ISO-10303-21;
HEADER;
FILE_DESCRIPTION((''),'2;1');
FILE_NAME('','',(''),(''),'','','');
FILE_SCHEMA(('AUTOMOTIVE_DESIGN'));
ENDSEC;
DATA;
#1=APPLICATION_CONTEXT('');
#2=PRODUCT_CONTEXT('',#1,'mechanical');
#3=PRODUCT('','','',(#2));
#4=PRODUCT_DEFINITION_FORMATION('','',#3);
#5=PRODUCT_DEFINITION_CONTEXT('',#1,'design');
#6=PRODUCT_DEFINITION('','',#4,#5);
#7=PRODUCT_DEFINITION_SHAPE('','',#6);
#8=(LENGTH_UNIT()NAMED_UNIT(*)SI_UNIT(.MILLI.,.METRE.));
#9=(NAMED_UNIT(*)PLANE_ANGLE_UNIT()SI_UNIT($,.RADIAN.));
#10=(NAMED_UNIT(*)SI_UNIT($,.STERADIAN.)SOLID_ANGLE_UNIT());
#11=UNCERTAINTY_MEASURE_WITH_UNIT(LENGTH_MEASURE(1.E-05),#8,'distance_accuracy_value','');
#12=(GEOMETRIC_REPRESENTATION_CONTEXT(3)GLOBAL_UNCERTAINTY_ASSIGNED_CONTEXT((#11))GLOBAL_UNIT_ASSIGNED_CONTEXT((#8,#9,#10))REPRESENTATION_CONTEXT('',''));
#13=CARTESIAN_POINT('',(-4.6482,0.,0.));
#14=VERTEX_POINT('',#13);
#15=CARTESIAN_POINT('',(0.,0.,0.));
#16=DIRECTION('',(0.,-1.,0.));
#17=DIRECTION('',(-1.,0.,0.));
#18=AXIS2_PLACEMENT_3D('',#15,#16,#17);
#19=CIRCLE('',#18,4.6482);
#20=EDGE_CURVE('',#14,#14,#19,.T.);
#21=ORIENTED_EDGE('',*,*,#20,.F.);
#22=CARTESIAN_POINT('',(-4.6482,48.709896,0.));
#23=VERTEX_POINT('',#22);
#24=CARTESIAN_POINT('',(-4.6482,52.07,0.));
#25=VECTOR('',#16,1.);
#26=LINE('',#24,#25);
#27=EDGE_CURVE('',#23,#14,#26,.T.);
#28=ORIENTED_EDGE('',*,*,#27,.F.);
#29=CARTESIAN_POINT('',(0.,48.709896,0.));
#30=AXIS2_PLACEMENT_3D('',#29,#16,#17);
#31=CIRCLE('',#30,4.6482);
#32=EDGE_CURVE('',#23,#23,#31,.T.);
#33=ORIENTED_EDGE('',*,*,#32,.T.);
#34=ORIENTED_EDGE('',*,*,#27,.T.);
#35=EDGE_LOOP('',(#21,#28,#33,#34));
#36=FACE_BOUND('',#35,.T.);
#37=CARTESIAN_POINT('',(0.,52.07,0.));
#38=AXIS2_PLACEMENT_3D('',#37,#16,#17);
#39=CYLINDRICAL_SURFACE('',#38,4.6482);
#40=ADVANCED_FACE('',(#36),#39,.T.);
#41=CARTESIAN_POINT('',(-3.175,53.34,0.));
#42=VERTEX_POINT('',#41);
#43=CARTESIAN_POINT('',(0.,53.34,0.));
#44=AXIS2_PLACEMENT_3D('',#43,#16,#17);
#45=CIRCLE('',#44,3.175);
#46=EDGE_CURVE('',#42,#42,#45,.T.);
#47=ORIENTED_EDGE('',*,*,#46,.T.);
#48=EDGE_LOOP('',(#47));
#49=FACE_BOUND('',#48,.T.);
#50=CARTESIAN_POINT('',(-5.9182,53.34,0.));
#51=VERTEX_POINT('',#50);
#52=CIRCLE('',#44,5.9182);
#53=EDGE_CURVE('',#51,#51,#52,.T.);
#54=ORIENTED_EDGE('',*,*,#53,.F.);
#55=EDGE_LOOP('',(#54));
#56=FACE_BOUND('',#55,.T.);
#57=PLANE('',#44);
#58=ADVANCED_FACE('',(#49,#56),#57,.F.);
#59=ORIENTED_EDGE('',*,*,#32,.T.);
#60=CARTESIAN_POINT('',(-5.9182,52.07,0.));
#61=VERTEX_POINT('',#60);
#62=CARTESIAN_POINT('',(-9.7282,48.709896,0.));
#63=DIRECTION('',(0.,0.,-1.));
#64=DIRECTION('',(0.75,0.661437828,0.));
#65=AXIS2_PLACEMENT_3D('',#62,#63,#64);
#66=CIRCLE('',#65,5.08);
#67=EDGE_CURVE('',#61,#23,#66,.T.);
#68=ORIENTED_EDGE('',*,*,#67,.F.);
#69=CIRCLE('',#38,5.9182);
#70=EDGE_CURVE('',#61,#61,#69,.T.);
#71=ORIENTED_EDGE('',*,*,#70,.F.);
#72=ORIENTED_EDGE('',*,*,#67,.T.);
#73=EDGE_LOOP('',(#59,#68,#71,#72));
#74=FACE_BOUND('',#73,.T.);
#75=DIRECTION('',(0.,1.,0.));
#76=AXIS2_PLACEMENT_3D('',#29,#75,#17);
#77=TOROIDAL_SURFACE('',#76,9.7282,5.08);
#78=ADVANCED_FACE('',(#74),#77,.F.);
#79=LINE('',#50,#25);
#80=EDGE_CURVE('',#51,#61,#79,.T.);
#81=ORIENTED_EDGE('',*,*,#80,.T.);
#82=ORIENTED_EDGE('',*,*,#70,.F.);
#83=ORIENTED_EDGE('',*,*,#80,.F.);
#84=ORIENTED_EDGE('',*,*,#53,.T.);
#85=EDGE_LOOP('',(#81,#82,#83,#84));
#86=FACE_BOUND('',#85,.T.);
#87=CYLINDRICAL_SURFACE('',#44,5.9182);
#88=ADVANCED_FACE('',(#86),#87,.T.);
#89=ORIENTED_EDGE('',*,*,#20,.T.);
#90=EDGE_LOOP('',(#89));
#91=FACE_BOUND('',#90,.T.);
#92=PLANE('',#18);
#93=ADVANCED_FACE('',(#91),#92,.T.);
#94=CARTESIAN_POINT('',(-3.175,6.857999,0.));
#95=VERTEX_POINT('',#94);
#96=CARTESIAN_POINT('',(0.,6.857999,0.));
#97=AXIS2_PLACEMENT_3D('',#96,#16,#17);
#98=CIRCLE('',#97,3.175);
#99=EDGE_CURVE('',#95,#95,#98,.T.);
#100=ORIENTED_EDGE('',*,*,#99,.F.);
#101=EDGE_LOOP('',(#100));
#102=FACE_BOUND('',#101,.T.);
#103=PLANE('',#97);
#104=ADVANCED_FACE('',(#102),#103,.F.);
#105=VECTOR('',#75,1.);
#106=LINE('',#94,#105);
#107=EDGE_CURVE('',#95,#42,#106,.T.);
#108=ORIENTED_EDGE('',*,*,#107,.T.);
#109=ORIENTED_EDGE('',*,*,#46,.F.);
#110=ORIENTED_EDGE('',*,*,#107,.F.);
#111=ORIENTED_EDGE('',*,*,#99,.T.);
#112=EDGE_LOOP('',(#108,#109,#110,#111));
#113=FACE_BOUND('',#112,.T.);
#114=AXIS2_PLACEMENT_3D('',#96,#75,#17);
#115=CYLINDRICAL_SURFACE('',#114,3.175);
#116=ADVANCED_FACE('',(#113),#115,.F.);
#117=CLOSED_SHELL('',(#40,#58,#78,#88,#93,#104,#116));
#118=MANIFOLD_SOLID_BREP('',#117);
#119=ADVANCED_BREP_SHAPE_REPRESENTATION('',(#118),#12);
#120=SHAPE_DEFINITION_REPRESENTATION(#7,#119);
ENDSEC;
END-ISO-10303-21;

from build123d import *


# Not quite as in the source:
# - a fillet or chamfer that OpenCascade refuses, or shapes differently, is made with other operations: its cross-section is extruded or revolved along the edge and cut away or added


with BuildPart() as f1:
    # F0 (on Top) → F1 (revolve)
    with BuildSketch(Plane.XY):
        Polygon((-4.6482, 0), (0, 0), (0, 6.8579994701), (-3.175, 6.8579994701), (-3.175, 53.34), (-4.6482, 53.34), (-5.9182, 53.34), (-5.9182, 52.07), (-4.6482, 52.07), align=None)
    revolve(axis=Axis((0, 3.4289997351, 0), (0, -1, 0)))

    # F2: fillet of radius 5.08 on 1 edges, made by hand

    # F2_s1 → F2_t2 (revolve)
    with BuildSketch(Plane.XY):
        with BuildLine():
            ThreePointArc((-5.9182, 52.07), (-4.9762951188, 50.5059470592), (-4.6482, 48.7098958349))
            Line((-4.6482, 48.7098958349), (-4.6482, 52.07))
            Line((-4.6482, 52.07), (-5.9182, 52.07))
        make_face()
    revolve(axis=Axis((0, 52.07, 0), (0, -1, 0)))


solid = f1.part
